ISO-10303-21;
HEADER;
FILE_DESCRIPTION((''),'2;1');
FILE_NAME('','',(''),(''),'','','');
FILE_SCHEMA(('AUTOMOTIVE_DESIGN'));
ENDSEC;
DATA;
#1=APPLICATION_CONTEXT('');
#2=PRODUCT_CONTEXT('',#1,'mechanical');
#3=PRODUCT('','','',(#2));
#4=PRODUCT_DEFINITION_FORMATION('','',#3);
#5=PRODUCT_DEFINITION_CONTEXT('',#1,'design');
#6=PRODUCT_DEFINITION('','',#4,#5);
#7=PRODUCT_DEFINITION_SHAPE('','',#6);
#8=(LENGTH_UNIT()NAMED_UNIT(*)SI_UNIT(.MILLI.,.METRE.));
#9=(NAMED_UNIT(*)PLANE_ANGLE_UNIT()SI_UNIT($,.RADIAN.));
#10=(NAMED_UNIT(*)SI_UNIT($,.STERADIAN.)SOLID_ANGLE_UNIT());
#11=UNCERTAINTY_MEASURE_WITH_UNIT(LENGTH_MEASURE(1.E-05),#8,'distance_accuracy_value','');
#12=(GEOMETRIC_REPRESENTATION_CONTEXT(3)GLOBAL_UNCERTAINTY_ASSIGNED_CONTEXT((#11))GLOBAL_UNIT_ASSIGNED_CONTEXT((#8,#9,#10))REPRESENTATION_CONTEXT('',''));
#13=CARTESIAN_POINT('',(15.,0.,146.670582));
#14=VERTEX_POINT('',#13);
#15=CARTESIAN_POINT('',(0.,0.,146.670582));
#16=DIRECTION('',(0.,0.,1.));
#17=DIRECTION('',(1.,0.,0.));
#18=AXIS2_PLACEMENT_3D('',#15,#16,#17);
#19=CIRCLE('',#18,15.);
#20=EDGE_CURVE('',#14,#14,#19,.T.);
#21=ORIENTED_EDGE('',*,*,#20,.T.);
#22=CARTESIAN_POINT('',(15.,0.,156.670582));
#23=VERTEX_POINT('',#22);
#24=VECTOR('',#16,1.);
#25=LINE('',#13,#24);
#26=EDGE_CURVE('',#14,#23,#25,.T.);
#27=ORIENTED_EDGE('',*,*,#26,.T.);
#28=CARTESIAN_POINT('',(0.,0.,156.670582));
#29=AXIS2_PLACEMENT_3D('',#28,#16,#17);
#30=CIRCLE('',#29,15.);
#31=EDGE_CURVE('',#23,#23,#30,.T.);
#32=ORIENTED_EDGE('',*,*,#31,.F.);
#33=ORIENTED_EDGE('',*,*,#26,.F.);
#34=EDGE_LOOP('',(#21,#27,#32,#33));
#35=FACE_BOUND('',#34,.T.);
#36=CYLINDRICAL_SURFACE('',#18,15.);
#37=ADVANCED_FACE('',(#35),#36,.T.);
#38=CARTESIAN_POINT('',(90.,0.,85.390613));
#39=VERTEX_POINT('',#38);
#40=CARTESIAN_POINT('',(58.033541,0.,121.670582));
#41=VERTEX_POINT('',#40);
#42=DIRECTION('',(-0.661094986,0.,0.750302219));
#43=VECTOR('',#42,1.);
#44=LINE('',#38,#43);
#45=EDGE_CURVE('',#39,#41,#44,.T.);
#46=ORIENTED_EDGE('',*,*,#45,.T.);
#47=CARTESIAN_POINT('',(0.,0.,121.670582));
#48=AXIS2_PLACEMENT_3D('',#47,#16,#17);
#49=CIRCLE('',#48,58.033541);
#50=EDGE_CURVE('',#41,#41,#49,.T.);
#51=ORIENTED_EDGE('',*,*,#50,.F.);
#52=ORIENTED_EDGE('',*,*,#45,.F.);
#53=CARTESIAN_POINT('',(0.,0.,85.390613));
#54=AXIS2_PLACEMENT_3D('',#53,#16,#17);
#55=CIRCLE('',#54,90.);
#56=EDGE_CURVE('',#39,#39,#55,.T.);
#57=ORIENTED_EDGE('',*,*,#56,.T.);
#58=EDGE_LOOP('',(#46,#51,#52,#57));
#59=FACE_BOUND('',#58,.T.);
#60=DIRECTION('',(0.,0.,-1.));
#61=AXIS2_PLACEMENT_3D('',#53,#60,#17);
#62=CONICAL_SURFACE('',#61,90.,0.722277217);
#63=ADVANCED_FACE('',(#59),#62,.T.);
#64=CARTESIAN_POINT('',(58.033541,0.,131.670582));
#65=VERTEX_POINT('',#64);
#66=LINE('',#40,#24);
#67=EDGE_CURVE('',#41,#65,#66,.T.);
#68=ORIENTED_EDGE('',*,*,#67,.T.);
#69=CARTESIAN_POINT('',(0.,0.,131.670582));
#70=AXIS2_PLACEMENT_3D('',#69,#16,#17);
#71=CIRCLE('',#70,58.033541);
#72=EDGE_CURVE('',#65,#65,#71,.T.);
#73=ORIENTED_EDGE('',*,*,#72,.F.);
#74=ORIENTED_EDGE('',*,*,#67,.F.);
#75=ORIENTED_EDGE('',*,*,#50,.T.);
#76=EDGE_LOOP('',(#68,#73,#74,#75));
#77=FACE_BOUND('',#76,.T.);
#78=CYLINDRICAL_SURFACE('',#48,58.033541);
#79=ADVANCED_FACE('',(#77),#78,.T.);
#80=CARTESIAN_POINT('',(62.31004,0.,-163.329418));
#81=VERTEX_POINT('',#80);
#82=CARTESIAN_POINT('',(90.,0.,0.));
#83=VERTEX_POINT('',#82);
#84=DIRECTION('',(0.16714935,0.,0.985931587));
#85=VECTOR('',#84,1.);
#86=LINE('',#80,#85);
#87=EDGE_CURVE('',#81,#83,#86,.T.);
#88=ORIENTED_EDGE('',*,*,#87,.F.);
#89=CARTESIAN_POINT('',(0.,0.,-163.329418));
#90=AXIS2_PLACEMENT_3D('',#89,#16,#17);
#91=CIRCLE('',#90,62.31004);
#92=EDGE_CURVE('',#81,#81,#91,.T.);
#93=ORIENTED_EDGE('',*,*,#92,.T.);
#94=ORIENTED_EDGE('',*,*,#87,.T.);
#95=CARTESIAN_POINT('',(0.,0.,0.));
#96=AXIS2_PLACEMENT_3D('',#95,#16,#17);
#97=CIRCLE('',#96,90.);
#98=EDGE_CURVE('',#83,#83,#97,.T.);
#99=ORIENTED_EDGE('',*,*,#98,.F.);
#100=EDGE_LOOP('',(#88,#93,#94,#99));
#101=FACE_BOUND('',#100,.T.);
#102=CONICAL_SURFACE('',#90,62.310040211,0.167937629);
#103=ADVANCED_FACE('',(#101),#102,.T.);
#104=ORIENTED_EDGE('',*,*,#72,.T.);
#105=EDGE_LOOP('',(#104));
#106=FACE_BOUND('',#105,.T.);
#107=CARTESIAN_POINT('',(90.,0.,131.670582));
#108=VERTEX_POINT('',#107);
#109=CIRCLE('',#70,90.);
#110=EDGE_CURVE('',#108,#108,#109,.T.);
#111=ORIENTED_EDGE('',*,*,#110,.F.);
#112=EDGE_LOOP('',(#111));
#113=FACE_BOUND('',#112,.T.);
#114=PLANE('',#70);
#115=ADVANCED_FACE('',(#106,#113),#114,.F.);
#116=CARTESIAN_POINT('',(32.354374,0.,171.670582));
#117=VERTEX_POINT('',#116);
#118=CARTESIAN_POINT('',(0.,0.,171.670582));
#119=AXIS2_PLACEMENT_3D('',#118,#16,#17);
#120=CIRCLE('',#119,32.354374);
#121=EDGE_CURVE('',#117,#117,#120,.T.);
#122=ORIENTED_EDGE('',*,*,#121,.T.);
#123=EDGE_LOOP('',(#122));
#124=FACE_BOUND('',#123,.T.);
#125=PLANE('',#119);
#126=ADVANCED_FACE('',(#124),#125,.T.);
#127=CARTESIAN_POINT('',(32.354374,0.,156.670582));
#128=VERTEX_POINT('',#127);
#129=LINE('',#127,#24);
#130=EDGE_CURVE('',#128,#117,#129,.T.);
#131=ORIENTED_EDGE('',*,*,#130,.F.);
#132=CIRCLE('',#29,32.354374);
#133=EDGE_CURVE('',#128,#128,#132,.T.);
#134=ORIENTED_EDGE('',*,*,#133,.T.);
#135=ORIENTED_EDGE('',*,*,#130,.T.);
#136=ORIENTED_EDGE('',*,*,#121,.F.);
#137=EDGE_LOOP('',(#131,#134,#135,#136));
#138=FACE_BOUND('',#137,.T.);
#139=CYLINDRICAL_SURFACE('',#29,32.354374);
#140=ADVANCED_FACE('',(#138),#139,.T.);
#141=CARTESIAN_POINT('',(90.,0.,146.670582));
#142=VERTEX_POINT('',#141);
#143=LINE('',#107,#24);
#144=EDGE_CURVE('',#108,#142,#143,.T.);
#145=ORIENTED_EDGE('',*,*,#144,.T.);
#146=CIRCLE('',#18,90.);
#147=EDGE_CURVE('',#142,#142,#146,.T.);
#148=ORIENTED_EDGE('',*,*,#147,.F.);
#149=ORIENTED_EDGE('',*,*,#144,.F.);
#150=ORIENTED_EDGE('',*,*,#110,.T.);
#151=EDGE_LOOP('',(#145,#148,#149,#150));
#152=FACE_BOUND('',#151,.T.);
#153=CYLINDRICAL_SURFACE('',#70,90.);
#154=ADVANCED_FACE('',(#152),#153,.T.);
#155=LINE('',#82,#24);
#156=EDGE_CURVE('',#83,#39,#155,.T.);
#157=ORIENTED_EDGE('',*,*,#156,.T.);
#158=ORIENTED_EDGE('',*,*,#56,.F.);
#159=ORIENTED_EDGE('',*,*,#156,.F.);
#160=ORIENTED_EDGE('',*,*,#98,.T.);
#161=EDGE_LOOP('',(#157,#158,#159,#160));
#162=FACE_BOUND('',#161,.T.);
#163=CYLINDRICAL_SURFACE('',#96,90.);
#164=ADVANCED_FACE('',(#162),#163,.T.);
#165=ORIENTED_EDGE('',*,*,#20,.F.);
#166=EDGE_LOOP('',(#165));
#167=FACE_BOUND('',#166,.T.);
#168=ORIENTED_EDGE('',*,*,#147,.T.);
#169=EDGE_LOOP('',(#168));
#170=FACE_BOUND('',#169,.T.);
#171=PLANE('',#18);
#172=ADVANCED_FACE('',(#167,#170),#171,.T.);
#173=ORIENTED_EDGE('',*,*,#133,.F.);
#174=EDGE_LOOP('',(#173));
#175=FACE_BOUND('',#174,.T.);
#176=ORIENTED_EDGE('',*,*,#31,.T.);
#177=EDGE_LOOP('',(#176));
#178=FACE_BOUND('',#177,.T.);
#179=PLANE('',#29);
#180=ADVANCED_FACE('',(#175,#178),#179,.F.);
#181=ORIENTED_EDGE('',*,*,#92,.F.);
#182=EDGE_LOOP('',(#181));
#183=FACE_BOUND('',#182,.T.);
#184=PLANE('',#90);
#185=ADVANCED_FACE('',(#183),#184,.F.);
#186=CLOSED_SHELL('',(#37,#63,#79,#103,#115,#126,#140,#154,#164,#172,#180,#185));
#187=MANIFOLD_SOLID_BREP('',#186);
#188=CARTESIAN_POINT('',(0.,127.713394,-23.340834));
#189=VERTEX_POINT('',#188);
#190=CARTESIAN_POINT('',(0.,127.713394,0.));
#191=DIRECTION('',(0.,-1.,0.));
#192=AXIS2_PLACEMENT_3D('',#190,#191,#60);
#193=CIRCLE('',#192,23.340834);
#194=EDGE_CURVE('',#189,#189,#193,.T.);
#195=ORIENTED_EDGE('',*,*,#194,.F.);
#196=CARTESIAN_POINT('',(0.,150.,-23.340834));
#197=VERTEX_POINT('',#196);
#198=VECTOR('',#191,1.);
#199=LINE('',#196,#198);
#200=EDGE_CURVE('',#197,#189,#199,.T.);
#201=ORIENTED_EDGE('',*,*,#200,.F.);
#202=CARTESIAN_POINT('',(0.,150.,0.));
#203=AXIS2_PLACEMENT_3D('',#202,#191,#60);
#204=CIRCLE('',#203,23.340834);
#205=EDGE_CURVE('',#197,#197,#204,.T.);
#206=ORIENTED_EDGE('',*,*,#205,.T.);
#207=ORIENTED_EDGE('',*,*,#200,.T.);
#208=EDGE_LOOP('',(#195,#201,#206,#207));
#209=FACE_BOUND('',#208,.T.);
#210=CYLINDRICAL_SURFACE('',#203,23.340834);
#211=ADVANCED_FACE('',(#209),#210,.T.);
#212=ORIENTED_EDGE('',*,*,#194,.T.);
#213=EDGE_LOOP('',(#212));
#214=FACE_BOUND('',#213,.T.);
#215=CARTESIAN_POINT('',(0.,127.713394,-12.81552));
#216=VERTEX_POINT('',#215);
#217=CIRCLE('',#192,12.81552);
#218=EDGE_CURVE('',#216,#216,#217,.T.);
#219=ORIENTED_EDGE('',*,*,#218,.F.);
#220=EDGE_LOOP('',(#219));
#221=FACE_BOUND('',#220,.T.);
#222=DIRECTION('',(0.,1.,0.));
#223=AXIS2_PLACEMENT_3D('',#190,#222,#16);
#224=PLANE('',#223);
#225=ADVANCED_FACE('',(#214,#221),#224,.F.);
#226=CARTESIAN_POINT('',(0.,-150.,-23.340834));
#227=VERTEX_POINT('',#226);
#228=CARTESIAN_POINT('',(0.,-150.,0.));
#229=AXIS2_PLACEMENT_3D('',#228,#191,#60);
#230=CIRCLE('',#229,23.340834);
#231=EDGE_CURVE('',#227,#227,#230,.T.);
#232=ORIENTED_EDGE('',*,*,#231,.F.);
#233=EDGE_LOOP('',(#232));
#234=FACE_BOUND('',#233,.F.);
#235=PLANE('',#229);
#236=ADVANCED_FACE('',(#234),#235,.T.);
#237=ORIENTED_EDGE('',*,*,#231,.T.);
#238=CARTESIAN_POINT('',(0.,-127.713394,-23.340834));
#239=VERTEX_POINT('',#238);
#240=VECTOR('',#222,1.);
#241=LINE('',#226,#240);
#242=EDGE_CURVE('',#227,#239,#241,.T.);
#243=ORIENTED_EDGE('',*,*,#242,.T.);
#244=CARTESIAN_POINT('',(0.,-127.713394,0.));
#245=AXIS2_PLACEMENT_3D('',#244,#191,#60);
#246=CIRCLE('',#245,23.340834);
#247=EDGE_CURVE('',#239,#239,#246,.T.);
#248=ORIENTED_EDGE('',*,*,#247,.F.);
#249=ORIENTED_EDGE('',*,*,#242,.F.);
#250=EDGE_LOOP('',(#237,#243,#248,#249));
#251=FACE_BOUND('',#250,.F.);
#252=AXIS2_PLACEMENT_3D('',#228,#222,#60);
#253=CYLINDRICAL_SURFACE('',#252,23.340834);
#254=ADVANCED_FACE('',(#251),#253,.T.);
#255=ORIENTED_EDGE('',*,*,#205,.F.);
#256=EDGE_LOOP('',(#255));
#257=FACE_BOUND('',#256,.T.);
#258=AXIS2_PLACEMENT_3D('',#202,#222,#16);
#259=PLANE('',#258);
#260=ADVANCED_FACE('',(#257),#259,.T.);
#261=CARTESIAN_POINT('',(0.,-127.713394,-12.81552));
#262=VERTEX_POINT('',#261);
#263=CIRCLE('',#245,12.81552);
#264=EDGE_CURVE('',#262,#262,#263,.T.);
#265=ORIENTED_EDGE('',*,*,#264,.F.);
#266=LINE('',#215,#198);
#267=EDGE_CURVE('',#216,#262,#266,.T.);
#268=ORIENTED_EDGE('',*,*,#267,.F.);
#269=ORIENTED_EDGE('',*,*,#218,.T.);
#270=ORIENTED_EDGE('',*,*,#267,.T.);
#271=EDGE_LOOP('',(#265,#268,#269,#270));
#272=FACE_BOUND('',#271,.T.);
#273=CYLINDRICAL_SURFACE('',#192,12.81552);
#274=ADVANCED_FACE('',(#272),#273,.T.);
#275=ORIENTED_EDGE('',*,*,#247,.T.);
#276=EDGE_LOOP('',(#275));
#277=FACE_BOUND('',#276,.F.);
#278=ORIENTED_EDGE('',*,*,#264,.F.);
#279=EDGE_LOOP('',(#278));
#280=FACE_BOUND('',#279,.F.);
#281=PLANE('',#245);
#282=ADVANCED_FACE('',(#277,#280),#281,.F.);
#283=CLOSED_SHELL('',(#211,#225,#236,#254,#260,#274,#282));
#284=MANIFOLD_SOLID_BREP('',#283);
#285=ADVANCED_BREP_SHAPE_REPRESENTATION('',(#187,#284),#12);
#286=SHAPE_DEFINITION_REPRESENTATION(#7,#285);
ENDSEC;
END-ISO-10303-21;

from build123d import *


with BuildPart() as f1:
    # F0 (on Front) → F1 (revolve)
    with BuildSketch(Plane.XZ):
        Polygon((0, 171.6705819281), (0, 0), (0, -163.3294180719), (62.310040211, -163.3294180719), (90, 0), (90, 85.3906134428), (58.0335408158, 121.6705819281), (58.0335408158, 131.6705819281), (90, 131.6705819281), (90, 146.6705819281), (15, 146.6705819281), (15, 156.6705819281), (32.3543744587, 156.6705819281), (32.3543744587, 171.6705819281), align=None)
    revolve(axis=Axis((0, 0, 85.8352909641), (0, 0, 1)))


with BuildPart() as f3:
    # F2 (on Right) → F3 (revolve)
    with BuildSketch(Plane.YZ):
        Polygon((0, -12.8155195192), (0, 0), (-127.7133935073, 0), (-150, 0), (-150, -23.3408341183), (-127.7133935073, -23.3408341183), (-127.7133935073, -12.8155195192), align=None)
    revolve(axis=Axis((0, -63.8566967536, 0), (0, -1, 0)))

    # F4: F3 across plane


with BuildPart() as f3_1:
    add(f3.part)
    add(f3.part.mirror(Plane.XZ))


solid = Compound([f1.part, f3_1.part])
